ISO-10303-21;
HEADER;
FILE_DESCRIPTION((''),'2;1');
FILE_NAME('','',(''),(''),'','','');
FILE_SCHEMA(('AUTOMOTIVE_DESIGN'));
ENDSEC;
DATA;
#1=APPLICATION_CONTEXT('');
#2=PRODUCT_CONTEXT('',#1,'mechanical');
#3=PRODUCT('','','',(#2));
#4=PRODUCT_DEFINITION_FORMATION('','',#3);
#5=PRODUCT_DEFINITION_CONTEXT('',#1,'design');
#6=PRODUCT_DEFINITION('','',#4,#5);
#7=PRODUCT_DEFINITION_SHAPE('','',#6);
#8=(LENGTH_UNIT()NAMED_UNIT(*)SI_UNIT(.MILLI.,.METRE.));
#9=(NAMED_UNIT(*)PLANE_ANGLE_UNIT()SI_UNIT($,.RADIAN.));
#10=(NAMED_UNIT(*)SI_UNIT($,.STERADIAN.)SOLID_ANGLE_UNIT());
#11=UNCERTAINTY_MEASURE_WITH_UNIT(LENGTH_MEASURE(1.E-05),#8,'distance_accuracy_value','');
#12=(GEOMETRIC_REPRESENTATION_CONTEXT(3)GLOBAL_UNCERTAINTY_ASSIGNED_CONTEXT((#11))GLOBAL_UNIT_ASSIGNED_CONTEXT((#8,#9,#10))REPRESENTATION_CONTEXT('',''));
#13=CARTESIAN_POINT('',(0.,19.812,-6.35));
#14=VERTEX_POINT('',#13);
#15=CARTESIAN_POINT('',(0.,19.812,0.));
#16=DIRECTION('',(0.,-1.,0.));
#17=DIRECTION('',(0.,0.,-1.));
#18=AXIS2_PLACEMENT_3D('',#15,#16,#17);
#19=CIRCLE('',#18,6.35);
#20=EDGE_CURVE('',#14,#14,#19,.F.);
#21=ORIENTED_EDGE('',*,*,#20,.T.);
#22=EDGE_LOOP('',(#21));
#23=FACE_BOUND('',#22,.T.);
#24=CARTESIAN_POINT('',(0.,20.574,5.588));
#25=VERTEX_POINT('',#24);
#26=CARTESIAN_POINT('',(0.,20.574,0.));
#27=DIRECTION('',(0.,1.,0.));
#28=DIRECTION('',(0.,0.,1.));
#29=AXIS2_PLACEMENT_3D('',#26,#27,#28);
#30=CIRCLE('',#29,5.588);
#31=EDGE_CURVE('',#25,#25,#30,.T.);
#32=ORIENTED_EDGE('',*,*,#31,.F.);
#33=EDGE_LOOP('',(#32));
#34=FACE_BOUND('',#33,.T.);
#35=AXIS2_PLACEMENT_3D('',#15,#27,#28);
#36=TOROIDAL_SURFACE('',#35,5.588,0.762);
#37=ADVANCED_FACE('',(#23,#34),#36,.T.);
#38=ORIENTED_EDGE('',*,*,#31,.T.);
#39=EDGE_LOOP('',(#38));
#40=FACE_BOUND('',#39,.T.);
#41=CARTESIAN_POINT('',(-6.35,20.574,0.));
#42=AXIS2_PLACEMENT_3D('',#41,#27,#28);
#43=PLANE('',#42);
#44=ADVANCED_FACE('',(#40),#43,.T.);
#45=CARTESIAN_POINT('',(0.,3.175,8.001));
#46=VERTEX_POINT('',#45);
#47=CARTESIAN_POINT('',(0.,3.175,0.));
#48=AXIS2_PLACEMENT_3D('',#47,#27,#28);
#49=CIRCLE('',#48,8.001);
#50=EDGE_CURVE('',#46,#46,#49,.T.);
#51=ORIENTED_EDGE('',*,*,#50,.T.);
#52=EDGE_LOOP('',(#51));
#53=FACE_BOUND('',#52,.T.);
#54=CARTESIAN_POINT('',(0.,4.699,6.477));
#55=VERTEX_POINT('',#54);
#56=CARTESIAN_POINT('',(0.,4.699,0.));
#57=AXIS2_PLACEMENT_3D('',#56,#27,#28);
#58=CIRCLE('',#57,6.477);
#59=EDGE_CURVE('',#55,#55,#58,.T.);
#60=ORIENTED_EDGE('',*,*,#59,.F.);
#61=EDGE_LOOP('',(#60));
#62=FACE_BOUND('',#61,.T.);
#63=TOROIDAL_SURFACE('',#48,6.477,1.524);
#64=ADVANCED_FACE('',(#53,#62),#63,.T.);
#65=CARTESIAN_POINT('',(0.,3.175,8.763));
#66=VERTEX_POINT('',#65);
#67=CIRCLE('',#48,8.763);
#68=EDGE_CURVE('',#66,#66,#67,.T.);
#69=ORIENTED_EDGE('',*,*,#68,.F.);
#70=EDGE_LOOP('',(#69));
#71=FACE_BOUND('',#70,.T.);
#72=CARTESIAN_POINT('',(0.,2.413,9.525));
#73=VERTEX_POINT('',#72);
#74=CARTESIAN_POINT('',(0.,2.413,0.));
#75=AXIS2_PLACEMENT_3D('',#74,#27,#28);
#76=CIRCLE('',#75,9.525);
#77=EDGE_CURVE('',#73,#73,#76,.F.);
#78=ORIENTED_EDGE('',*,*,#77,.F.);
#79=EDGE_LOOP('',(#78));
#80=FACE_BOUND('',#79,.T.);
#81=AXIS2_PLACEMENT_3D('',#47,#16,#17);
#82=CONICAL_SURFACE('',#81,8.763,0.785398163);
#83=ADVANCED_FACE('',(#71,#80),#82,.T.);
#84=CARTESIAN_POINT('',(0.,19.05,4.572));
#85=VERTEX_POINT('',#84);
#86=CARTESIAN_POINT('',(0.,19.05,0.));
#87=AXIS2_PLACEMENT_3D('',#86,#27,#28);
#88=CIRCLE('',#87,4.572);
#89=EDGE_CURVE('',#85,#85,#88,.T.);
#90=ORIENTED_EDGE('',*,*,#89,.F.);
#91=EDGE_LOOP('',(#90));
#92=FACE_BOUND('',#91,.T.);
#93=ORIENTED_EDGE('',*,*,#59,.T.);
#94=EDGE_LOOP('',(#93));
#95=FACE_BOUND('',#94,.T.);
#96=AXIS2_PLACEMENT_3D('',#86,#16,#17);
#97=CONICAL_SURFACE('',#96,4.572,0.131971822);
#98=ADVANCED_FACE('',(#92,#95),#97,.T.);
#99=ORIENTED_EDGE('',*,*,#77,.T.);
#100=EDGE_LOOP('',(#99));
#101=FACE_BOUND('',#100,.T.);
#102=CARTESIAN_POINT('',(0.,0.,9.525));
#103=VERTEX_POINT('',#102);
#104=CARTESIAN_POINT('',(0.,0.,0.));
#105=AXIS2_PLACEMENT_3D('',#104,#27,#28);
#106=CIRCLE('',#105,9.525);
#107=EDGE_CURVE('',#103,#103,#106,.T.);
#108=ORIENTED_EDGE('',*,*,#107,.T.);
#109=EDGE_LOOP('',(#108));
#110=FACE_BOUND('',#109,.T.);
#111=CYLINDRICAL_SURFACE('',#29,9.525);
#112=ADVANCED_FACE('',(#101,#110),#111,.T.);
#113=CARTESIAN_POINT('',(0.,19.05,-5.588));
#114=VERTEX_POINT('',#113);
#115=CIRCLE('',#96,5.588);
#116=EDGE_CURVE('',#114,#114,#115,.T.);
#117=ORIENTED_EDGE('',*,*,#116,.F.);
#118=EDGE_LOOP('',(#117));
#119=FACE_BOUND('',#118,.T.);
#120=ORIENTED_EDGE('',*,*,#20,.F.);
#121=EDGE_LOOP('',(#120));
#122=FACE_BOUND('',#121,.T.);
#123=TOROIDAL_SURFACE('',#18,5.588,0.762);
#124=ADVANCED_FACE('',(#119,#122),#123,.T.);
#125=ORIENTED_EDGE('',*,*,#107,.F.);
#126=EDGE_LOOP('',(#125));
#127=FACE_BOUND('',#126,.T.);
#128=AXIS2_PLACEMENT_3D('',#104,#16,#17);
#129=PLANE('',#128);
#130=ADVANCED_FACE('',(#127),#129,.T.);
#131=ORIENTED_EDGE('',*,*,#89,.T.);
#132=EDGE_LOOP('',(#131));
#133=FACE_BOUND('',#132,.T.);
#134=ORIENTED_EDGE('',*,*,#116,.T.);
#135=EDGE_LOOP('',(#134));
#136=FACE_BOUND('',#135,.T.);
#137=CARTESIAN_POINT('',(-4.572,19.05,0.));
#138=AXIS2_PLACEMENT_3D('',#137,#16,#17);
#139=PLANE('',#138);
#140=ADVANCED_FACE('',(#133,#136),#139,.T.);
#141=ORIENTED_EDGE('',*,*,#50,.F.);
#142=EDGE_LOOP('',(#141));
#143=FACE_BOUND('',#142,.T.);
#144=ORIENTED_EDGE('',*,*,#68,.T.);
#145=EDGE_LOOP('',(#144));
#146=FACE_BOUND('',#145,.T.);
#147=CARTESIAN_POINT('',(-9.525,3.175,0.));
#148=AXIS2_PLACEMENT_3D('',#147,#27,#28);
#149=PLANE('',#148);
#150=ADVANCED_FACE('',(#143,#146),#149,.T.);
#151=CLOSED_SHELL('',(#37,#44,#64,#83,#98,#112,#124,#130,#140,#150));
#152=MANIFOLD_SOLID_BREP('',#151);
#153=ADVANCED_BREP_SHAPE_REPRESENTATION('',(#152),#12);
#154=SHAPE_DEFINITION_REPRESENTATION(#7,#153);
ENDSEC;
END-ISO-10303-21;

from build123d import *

# Parameters (mm, degrees)
CHAMFER1_SIZE = 0.762
FILLET2_R     = 1.524
FILLET3_R     = 0.762


with BuildPart() as part:
    # Sketch3 → Revolve1 (revolve)
    with BuildSketch(Plane.XY, mode=Mode.PRIVATE) as revolve1_sk:
        Polygon((0, 0), (-9.525, 0), (-9.525, 3.175), (-8.001, 3.175), (-8.001, 4.699), (-6.477, 4.699), (-4.572, 19.05), (-6.35, 19.05), (-6.35, 20.574), (0, 20.574), align=None)
    revolve(revolve1_sk.sketch.rotate(Axis((0, 20.574, 0), (0, -1, 0)), 270), axis=Axis((0, 20.574, 0), (0, -1, 0)))

    # Chamfer1
    chamfer1_edges = [part.edges().sort_by_distance(p)[0] for p in [
        (0, 3.175, -9.525),
    ]]
    chamfer(chamfer1_edges, length=CHAMFER1_SIZE)

    # Fillet2
    fillet2_edges = [part.edges().sort_by_distance(p)[0] for p in [
        (0, 4.699, -8.001),
    ]]
    fillet(fillet2_edges, radius=FILLET2_R - 0.0001)  # a hair under: the kernel refuses the full size

    # Fillet3
    fillet3_edges = [part.edges().sort_by_distance(p)[0] for p in [
        (0, 20.574, -6.35),
        (0, 19.05, -6.35),
    ]]
    fillet(fillet3_edges, radius=FILLET3_R - 0.0001)  # a hair under: the kernel refuses the full size


solid = part.part
